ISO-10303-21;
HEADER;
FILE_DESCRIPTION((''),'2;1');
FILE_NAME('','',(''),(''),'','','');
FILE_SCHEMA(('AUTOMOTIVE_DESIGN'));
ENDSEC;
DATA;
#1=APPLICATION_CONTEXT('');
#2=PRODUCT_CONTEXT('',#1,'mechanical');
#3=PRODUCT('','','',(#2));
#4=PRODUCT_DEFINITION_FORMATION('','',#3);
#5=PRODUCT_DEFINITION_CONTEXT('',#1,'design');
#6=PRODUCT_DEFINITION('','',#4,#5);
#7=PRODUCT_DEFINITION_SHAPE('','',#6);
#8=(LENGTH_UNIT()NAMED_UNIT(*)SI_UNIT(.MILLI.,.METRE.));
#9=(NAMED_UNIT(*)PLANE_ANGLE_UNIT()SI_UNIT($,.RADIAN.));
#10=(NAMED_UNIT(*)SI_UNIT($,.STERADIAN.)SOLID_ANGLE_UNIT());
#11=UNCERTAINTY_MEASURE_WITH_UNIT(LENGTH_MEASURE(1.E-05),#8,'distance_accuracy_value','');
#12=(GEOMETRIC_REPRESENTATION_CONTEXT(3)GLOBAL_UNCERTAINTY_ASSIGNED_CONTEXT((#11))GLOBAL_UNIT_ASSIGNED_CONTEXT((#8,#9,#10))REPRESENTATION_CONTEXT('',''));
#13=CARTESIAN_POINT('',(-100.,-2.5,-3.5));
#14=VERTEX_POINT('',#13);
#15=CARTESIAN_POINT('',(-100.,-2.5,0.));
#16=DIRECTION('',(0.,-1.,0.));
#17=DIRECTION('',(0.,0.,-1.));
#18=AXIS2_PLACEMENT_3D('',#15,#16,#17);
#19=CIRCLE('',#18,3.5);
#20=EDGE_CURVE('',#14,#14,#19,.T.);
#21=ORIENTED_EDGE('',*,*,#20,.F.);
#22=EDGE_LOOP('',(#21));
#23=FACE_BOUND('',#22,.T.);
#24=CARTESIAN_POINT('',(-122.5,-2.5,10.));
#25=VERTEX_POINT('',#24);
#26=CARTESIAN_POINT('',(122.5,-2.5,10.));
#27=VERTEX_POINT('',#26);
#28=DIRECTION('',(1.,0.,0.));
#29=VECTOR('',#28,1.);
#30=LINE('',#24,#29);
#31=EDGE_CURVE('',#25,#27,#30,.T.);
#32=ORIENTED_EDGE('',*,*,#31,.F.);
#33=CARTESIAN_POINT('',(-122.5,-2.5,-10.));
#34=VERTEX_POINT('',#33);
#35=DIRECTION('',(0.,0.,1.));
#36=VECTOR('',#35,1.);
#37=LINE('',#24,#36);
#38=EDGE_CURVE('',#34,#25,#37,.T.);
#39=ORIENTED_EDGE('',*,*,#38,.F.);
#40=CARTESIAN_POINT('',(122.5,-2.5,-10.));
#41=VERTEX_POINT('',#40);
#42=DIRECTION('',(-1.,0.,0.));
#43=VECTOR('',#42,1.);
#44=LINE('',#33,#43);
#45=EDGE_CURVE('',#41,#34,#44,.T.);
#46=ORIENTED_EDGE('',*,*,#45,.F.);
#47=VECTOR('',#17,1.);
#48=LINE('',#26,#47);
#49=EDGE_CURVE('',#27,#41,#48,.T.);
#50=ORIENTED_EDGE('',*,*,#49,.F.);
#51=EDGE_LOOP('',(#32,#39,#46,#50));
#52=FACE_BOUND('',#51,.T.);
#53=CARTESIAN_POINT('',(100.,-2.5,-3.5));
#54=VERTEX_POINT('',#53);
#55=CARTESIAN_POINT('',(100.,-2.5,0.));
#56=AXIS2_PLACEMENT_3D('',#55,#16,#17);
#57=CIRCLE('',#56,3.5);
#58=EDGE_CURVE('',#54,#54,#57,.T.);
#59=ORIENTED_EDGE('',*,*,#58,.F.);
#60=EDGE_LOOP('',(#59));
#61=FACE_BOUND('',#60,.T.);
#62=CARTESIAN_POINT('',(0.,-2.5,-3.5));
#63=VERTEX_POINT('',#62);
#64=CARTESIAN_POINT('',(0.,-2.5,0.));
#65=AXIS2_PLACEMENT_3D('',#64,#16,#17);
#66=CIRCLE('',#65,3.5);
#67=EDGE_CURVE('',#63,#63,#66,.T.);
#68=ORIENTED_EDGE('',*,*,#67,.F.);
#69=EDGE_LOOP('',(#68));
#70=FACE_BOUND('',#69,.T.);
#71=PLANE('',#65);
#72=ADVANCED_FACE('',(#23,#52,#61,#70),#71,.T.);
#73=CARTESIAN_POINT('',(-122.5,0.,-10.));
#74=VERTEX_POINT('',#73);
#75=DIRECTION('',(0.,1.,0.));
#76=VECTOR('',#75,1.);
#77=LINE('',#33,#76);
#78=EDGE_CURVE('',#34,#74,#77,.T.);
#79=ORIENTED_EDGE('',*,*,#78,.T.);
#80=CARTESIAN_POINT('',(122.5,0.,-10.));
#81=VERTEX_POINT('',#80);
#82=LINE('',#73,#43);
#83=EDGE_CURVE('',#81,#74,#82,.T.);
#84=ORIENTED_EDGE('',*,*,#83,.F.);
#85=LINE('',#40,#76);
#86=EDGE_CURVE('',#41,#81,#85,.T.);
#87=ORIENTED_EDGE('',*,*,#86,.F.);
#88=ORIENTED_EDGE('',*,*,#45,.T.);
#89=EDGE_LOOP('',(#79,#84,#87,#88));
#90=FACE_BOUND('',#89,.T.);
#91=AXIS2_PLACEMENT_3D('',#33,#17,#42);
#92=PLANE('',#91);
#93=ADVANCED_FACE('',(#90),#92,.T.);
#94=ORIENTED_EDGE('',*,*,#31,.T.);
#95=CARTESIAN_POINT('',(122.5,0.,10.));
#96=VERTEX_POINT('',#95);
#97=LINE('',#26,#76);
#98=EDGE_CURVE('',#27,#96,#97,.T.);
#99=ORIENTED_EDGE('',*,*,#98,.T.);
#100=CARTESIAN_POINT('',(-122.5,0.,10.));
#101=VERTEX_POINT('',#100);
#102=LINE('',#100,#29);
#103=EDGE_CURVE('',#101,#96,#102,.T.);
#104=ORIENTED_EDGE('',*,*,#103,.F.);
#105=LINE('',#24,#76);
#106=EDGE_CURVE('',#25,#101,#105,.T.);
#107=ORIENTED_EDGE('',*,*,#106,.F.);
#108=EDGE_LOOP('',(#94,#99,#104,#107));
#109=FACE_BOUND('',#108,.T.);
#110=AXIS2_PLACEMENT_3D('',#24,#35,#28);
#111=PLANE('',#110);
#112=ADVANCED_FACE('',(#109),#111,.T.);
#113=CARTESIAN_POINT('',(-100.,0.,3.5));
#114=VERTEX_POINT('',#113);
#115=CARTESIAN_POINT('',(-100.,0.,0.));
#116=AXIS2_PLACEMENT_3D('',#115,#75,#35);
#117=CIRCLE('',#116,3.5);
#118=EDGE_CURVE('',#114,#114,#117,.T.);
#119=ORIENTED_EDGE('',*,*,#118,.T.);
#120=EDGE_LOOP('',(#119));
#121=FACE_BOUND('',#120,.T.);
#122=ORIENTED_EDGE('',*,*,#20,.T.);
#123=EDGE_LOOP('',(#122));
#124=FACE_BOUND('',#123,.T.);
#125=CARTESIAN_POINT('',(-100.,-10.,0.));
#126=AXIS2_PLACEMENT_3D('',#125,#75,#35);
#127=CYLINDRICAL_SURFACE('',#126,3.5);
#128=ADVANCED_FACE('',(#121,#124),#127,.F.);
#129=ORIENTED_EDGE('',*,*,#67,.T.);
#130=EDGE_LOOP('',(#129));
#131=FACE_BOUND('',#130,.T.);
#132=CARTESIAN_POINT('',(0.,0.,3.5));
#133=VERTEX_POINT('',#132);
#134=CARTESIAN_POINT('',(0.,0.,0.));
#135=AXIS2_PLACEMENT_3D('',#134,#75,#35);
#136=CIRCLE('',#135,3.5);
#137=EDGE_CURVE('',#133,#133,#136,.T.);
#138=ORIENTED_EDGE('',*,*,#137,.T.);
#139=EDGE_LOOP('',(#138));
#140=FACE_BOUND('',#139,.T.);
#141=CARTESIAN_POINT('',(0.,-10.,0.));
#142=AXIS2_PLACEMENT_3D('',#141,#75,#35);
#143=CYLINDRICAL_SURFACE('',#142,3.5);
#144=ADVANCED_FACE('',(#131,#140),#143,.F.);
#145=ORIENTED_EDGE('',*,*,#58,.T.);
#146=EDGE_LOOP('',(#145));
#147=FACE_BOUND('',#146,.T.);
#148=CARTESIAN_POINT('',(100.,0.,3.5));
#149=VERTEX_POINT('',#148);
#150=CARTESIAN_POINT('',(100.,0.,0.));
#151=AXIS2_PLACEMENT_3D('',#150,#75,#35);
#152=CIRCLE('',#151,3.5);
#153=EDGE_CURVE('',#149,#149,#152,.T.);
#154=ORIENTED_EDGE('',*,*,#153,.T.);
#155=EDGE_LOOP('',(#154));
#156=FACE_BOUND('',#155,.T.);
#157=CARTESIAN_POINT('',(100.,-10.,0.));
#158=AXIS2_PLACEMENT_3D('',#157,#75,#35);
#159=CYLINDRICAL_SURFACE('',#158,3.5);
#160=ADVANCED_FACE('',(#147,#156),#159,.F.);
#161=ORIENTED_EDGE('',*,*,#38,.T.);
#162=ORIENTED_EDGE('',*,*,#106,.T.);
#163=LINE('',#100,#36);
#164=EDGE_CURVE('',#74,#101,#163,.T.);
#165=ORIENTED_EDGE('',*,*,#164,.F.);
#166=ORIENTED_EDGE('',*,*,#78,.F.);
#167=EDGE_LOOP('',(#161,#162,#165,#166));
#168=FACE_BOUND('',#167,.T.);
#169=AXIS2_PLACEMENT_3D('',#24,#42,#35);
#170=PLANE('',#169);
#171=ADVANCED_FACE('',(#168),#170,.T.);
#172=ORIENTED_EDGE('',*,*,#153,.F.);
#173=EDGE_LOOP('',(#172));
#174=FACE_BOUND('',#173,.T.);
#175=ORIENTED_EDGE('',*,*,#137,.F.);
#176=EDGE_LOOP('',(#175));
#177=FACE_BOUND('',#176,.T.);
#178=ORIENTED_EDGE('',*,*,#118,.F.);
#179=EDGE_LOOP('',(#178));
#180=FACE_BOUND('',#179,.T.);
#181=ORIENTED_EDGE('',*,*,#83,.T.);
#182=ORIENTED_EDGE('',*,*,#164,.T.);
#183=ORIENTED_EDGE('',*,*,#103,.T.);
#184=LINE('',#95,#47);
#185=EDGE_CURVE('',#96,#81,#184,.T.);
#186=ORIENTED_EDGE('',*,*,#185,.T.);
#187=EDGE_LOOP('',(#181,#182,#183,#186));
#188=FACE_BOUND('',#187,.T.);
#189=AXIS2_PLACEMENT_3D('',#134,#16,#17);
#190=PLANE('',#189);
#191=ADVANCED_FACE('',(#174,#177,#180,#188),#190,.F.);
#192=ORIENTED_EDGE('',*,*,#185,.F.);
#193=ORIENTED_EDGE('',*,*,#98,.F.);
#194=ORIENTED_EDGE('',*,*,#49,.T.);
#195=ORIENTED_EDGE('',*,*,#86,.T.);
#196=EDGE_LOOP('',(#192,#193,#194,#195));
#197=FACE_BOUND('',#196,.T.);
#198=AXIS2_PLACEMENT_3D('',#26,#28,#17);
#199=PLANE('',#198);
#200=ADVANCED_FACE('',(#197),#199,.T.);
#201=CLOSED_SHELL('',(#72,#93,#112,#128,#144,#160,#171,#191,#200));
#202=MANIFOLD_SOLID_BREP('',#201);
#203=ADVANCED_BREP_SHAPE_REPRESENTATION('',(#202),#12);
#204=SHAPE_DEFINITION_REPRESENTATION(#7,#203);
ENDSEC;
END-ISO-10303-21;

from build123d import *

# Parameters (mm, degrees)
SKETCH1_W            = 245
SKETCH1_H            = 20
BASE_FLANGE1_DEPTH   = 2.5
SKETCH6_R            = 3.5
CUT_EXTRUDE1_DEPTH   = 10
LPATTERN1_COUNT      = 6
LPATTERN1_PITCH      = 146
LPATTERN1_COUNT_DIR2 = 6
LPATTERN1_PITCH_DIR2 = 146
LPATTERN2_COUNT      = 2
LPATTERN2_PITCH      = 100
LPATTERN2_COL_COUNT  = 2
LPATTERN2_COL_PITCH  = 100


# Sheet-metal steps are written as plain solids
with BuildPart() as part:
    # Sketch1 → Base-Flange1 (new body)
    with BuildSketch(Plane(origin=(0, 0, 0), x_dir=(1, 0, 0), z_dir=(0, 1, 0))):
        Rectangle(SKETCH1_W, SKETCH1_H)
    extrude(amount=-BASE_FLANGE1_DEPTH)

    # Sketch6 → Cut-Extrude1 (cut)
    with BuildSketch(Plane(origin=(0, 0, 0), x_dir=(1, 0, 0), z_dir=(0, 1, 0))):
        with Locations(Location((0, 0, 0), (0, 0, 270))):
            Circle(SKETCH6_R)
    cut_extrude1 = extrude(amount=-CUT_EXTRUDE1_DEPTH, mode=Mode.SUBTRACT)

    # LPattern1: Cut-Extrude1 6 × 6
    with Locations(*[Vector(-1, 0, 0) * (i * LPATTERN1_PITCH) + Vector(1, 0, 0) * (j * LPATTERN1_PITCH_DIR2) for i in range(LPATTERN1_COUNT) for j in range(LPATTERN1_COUNT_DIR2) if (i, j) != (0, 0)]):
        add(cut_extrude1, mode=Mode.SUBTRACT)

    # LPattern2: Cut-Extrude1 ×2
    with Locations(*[(-i * LPATTERN2_PITCH, 0, 0) for i in range(1, LPATTERN2_COUNT)]):
        add(cut_extrude1, mode=Mode.SUBTRACT)

    # LPattern2 col: Cut-Extrude1 ×2
    with Locations(*[(i * LPATTERN2_COL_PITCH, 0, 0) for i in range(1, LPATTERN2_COL_COUNT)]):
        add(cut_extrude1, mode=Mode.SUBTRACT)


solid = part.part
